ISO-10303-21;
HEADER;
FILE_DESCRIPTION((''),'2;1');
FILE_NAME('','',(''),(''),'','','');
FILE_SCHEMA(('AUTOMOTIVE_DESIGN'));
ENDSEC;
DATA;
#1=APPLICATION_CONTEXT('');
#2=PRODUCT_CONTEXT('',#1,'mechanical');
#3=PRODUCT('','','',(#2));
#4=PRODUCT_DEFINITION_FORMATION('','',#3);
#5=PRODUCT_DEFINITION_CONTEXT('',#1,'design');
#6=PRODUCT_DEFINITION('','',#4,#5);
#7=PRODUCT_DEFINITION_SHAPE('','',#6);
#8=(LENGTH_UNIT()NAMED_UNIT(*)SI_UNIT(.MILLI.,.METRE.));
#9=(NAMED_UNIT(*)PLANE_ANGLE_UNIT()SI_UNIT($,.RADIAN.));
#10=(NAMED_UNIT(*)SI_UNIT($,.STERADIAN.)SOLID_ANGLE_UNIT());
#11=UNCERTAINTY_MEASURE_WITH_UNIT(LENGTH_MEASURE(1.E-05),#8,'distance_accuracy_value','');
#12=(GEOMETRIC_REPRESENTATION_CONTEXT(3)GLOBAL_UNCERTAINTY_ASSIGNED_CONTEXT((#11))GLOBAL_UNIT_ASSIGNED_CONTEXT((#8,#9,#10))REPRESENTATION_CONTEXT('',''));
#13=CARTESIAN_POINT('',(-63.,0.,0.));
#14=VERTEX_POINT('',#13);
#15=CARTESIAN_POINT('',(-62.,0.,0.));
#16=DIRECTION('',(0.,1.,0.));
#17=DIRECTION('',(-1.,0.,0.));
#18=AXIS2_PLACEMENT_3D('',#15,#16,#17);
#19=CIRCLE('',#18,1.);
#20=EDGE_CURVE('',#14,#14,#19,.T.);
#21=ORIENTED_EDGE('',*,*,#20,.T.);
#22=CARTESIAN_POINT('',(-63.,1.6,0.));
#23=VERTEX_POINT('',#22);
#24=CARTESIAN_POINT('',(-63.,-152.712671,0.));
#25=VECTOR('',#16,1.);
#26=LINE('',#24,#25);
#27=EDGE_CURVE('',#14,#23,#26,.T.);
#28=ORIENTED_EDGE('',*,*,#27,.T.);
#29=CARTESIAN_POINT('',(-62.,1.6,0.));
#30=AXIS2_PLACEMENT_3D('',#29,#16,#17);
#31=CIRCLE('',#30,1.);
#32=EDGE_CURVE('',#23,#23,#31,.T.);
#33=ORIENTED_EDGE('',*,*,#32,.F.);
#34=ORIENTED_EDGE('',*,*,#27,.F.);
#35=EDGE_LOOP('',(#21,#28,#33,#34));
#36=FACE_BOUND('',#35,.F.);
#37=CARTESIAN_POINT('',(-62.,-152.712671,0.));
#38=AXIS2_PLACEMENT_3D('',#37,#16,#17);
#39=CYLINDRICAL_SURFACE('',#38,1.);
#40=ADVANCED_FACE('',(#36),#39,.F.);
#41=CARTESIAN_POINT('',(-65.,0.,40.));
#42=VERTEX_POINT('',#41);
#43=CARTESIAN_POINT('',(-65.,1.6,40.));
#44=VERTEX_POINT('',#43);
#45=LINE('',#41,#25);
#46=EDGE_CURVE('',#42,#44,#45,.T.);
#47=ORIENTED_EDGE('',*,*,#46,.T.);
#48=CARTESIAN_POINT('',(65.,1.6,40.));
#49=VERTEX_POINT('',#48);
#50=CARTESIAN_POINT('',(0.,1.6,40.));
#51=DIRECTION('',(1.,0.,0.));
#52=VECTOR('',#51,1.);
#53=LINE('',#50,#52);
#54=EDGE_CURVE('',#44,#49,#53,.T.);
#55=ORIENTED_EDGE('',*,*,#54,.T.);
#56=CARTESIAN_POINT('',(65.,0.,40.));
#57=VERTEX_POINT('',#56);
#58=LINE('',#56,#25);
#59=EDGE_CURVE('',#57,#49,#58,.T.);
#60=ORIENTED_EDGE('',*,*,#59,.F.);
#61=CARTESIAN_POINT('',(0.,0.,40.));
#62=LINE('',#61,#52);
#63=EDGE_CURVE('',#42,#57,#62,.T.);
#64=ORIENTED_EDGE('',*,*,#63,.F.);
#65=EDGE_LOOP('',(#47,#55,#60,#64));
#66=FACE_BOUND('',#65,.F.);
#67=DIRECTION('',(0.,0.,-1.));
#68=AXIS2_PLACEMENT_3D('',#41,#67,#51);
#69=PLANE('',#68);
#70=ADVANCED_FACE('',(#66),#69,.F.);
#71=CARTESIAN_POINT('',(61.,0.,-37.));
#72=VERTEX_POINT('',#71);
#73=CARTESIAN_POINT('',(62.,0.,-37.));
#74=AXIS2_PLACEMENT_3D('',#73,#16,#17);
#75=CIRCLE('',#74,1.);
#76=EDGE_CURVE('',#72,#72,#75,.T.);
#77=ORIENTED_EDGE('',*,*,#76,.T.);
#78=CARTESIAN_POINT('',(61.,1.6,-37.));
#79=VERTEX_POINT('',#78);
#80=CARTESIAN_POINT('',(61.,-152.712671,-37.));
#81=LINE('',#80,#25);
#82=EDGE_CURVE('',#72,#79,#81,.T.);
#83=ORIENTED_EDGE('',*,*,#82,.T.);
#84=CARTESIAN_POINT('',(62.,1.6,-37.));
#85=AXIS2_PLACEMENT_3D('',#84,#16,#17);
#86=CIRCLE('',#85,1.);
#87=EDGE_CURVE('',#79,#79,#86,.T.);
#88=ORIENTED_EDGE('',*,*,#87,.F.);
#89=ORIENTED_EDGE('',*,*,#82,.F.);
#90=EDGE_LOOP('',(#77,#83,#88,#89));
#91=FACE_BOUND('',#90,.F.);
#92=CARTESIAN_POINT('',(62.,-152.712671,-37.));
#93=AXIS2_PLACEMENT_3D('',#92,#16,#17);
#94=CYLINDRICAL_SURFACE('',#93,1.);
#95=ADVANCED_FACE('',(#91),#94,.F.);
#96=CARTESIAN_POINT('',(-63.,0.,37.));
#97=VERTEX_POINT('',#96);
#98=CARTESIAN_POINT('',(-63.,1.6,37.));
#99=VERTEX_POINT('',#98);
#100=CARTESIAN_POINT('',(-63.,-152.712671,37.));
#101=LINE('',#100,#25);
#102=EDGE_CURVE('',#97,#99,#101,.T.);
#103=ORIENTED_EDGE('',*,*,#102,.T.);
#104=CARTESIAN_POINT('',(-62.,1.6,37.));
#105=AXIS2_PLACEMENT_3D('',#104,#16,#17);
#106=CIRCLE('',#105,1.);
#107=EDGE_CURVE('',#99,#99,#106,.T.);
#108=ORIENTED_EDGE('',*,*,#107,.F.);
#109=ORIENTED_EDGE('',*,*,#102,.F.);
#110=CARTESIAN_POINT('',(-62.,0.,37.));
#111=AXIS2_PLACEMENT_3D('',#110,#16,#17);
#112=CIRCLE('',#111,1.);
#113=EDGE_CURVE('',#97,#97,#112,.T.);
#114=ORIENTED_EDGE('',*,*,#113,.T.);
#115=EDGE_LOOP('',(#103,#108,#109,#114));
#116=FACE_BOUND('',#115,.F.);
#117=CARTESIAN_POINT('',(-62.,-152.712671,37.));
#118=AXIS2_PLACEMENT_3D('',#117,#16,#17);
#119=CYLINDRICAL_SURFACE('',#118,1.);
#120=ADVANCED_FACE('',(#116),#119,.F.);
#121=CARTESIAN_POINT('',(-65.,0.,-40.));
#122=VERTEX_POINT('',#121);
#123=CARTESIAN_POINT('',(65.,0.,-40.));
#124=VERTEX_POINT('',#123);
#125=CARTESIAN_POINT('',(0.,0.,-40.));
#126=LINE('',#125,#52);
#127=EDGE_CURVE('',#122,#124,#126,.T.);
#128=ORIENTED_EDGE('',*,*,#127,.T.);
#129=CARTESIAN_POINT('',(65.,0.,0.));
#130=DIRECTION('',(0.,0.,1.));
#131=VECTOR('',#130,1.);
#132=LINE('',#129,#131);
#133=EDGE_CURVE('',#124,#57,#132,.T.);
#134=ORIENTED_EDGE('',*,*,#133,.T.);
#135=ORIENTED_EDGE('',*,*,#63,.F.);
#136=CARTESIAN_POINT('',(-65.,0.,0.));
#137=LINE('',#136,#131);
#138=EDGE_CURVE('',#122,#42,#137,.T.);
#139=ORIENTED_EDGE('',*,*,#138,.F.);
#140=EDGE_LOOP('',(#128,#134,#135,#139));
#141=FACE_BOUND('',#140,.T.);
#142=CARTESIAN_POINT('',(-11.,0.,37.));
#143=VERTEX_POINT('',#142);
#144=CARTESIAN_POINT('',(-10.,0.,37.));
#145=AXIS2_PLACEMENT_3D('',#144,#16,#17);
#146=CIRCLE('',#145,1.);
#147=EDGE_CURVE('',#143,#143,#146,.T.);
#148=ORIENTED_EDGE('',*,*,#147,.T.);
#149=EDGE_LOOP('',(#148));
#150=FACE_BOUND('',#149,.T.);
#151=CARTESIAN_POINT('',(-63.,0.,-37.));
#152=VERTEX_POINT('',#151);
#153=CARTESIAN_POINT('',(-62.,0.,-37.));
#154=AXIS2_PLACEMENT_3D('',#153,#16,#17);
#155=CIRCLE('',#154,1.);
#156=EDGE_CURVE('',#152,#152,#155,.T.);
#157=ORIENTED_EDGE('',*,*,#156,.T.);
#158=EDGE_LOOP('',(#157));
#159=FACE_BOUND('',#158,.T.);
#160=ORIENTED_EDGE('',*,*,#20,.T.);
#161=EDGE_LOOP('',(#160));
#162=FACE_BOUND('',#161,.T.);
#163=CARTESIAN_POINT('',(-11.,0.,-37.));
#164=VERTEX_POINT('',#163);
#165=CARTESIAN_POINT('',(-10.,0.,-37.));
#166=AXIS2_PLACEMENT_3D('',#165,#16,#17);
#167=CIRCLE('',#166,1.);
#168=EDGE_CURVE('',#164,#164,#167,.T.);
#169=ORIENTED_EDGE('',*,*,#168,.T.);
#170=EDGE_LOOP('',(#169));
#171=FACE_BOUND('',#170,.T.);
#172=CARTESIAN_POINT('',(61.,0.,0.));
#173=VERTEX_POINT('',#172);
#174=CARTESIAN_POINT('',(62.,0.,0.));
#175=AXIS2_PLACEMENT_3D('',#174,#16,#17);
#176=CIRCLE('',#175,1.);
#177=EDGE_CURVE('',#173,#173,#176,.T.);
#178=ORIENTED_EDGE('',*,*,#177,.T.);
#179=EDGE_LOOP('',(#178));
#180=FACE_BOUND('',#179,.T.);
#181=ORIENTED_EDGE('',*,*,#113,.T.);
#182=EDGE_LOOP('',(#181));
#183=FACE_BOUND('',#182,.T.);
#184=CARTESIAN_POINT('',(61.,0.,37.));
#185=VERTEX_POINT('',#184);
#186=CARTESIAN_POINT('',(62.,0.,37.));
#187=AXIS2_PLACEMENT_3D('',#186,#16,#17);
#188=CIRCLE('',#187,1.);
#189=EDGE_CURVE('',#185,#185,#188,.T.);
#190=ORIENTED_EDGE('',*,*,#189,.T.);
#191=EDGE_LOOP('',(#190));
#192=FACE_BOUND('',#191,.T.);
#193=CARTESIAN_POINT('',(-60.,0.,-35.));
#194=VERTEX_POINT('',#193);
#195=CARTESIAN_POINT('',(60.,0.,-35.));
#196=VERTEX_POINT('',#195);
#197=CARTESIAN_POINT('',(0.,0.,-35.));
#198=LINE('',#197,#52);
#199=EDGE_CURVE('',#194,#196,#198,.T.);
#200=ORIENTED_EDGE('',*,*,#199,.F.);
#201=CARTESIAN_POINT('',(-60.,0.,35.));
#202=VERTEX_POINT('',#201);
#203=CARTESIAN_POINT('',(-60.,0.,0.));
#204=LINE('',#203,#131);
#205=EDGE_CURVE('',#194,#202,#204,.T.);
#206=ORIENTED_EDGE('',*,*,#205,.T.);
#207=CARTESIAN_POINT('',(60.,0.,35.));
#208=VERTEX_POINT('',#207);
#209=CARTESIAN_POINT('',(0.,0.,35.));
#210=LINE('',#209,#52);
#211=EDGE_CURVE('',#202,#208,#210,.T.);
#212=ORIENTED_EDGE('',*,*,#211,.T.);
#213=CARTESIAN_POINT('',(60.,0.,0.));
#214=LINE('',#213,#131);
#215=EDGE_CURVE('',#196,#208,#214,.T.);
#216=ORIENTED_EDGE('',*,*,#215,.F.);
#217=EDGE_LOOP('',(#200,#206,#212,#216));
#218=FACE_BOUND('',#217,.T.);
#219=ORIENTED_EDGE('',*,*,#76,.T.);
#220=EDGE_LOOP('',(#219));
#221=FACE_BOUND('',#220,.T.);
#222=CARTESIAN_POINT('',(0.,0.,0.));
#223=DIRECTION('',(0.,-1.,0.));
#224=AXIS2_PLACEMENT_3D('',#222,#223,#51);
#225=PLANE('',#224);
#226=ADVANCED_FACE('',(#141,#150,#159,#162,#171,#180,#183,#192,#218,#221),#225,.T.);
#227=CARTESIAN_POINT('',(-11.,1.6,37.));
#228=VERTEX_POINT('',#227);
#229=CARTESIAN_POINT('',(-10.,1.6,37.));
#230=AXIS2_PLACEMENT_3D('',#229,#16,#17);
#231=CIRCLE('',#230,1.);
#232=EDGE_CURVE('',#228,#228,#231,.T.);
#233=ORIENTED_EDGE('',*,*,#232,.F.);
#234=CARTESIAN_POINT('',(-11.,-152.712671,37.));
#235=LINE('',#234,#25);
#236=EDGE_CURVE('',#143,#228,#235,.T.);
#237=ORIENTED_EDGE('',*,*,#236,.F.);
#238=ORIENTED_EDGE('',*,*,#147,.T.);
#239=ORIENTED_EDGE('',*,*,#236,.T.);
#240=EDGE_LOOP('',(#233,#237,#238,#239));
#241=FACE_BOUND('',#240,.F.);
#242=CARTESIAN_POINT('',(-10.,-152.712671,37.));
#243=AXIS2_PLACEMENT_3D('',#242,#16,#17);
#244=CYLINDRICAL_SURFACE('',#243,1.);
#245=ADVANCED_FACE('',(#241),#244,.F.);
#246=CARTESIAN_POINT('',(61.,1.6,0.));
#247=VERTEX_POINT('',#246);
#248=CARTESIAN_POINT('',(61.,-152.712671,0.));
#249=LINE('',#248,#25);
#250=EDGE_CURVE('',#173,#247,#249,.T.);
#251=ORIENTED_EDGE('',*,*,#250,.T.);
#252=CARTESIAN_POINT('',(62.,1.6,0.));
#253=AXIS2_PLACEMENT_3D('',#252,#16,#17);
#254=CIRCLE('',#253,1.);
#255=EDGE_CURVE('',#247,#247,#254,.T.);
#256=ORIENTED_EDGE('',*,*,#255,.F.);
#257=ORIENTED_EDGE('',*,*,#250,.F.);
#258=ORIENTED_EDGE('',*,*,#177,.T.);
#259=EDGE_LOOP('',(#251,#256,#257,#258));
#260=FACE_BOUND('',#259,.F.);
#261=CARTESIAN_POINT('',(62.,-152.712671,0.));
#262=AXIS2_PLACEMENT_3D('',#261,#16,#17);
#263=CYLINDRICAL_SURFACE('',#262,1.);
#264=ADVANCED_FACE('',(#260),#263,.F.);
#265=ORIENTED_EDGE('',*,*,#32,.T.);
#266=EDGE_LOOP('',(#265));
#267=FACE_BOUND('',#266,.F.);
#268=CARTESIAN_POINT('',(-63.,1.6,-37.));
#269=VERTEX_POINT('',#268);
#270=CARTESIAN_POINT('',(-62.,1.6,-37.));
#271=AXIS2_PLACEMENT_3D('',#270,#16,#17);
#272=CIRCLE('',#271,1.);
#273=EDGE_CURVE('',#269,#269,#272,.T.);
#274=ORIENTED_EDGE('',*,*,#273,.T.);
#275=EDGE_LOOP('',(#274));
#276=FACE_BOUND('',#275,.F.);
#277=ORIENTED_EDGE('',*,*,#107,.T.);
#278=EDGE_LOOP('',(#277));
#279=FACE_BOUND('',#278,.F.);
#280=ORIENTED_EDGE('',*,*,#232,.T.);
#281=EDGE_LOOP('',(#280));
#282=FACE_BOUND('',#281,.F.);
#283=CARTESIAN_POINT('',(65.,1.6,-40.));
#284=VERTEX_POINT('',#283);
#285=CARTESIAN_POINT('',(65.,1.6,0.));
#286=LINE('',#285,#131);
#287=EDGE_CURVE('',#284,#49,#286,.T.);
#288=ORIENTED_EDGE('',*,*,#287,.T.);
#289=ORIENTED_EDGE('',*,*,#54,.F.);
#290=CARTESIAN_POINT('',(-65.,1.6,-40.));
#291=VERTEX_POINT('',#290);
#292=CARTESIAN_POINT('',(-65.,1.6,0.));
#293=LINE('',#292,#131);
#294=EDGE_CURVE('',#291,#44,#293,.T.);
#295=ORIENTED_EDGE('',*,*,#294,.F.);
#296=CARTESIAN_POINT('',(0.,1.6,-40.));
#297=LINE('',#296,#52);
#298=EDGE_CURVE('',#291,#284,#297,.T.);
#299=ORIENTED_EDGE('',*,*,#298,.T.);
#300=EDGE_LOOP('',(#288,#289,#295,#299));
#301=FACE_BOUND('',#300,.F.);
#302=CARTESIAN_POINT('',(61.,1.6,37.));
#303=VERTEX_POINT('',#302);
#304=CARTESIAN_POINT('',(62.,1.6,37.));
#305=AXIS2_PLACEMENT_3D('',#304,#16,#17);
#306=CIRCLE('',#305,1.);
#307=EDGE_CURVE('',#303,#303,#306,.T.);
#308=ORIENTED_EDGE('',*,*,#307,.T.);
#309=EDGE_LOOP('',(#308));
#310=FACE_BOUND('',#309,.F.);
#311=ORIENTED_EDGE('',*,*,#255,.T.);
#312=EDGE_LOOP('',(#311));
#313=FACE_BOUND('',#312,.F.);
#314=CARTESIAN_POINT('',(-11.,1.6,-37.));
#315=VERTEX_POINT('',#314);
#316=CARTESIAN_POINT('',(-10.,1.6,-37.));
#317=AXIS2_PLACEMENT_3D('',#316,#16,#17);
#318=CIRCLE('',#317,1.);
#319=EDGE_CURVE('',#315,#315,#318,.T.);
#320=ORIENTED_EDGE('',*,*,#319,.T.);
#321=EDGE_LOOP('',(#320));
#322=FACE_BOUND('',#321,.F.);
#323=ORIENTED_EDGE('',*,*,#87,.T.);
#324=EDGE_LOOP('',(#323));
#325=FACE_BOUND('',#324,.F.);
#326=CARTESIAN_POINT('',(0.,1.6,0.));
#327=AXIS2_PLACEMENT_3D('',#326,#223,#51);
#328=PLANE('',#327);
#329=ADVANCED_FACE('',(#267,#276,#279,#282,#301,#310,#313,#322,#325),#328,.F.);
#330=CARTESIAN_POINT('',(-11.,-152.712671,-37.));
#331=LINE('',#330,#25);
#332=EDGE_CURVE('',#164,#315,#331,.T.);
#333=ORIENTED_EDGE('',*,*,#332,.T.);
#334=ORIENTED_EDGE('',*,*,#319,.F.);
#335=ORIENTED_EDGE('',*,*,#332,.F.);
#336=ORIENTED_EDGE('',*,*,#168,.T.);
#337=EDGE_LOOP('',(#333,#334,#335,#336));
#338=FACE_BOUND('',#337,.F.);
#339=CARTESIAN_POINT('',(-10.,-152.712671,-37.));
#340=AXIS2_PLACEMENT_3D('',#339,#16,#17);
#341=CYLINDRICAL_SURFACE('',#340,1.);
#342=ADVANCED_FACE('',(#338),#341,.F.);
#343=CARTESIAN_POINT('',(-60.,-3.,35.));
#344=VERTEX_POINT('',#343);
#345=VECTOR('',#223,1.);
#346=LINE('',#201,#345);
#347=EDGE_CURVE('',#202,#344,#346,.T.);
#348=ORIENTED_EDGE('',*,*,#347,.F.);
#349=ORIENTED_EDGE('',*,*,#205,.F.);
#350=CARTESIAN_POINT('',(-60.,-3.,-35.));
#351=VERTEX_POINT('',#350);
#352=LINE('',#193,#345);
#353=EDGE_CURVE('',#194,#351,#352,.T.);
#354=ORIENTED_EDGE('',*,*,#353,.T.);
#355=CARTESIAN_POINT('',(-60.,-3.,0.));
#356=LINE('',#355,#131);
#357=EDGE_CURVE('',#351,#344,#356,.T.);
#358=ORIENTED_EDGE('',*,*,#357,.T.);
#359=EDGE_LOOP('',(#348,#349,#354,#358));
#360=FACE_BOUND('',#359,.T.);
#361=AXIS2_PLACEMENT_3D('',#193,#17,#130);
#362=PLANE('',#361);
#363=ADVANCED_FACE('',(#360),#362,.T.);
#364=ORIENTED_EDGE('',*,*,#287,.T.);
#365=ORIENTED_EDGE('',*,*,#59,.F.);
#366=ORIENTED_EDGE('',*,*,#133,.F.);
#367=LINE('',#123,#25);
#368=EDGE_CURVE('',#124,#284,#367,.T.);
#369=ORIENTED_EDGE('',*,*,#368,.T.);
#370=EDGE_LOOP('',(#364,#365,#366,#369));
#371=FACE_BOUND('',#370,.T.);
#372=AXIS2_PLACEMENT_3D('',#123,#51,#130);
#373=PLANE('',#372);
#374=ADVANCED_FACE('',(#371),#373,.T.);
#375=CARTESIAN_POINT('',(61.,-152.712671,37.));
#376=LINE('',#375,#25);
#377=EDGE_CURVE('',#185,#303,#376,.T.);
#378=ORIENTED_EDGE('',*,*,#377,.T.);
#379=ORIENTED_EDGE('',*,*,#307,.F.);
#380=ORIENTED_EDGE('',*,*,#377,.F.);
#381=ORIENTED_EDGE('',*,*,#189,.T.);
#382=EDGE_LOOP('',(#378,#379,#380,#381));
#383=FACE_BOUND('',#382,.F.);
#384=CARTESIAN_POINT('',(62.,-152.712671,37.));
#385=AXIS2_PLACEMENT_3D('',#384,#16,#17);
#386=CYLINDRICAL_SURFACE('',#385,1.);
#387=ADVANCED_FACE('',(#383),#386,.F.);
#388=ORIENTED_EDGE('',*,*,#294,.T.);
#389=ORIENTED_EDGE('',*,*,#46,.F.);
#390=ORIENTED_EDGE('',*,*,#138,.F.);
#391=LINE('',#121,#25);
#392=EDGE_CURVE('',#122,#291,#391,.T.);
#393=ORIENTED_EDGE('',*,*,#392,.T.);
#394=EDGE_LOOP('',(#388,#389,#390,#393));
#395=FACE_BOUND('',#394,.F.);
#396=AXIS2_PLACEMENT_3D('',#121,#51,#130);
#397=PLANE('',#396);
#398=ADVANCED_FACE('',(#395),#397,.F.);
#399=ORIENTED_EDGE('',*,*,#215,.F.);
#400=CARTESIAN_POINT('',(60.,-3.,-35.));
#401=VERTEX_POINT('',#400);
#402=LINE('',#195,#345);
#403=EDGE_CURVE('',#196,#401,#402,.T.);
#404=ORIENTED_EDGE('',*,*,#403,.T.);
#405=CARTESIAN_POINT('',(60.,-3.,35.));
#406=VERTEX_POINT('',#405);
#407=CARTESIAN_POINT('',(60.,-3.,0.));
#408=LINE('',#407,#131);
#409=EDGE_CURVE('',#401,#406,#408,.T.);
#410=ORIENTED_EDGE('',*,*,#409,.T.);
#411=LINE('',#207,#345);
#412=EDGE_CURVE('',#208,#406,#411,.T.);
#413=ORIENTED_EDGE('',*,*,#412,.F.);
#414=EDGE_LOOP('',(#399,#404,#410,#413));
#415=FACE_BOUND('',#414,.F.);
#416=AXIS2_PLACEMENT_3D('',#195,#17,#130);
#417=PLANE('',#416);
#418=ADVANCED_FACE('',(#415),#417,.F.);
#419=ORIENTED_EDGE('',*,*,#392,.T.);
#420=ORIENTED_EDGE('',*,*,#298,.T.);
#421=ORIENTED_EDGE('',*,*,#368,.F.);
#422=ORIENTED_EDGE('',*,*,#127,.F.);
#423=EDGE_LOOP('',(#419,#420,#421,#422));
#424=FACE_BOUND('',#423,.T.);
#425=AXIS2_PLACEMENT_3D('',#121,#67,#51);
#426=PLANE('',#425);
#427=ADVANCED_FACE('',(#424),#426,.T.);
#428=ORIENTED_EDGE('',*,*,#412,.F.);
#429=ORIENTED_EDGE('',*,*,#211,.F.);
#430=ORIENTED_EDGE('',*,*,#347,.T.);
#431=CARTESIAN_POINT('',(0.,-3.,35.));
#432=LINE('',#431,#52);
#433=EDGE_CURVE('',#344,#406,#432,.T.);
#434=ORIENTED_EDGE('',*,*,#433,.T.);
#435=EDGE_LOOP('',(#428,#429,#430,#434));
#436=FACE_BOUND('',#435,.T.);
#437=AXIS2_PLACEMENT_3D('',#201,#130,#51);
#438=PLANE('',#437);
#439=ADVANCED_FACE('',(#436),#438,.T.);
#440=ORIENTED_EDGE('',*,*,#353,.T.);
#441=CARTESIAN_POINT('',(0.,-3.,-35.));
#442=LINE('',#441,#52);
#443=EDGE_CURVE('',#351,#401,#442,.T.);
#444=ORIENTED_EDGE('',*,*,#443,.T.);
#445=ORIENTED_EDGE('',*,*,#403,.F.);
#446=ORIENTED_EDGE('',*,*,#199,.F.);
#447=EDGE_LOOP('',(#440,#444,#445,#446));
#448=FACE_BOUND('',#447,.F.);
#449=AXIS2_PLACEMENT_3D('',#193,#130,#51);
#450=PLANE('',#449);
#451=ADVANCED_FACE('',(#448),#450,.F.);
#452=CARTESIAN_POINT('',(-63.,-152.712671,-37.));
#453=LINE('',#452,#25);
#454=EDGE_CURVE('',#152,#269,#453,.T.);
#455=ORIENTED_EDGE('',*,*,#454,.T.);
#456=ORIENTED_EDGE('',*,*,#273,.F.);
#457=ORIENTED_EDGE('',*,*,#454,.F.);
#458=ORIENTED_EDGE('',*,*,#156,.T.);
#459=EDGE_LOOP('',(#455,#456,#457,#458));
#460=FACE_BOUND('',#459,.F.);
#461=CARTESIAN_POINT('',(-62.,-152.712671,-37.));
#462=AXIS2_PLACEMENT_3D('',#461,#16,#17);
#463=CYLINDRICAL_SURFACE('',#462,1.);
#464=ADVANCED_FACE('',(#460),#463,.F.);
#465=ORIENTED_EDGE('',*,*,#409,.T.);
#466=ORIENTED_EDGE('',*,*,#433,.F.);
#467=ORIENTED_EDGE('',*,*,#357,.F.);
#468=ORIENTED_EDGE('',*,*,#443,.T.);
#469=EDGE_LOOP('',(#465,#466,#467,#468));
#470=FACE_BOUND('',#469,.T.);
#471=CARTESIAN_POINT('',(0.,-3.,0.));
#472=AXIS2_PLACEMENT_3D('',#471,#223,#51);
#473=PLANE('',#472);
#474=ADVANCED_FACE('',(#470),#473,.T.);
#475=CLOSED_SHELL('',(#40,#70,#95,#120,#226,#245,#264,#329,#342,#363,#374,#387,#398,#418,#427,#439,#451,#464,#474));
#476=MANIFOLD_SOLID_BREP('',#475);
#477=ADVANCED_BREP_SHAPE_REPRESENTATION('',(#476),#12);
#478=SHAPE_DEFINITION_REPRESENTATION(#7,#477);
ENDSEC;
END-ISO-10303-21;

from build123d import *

# Parameters (mm, degrees)
F0_W     = 120
F0_H     = 70
F2_DEPTH = 3
F1_W     = 130
F1_H     = 80
F3_DEPTH = 1.6
F4_D     = 2


# Not quite as in the source:
# - a feature names something its author has since deleted; it is built from what else it names


with BuildPart() as f2:
    # F0 (on Front) → F2 (new body)
    with BuildSketch(Plane.XZ):
        Rectangle(F0_W, F0_H)
    extrude(amount=F2_DEPTH)

    # F1 (on Front) → F3 (join)
    with BuildSketch(Plane.XZ):
        Rectangle(F1_W, F1_H)
    extrude(amount=-F3_DEPTH)

    # F4 (through all)
    with Locations(Plane.XZ):
        with Locations((62, 37), (62, 0), (62, -37), (-62, 37), (-62, 0), (-62, -37), (-10, 37), (-10, -37)):
            Hole(F4_D / 2)


solid = f2.part
